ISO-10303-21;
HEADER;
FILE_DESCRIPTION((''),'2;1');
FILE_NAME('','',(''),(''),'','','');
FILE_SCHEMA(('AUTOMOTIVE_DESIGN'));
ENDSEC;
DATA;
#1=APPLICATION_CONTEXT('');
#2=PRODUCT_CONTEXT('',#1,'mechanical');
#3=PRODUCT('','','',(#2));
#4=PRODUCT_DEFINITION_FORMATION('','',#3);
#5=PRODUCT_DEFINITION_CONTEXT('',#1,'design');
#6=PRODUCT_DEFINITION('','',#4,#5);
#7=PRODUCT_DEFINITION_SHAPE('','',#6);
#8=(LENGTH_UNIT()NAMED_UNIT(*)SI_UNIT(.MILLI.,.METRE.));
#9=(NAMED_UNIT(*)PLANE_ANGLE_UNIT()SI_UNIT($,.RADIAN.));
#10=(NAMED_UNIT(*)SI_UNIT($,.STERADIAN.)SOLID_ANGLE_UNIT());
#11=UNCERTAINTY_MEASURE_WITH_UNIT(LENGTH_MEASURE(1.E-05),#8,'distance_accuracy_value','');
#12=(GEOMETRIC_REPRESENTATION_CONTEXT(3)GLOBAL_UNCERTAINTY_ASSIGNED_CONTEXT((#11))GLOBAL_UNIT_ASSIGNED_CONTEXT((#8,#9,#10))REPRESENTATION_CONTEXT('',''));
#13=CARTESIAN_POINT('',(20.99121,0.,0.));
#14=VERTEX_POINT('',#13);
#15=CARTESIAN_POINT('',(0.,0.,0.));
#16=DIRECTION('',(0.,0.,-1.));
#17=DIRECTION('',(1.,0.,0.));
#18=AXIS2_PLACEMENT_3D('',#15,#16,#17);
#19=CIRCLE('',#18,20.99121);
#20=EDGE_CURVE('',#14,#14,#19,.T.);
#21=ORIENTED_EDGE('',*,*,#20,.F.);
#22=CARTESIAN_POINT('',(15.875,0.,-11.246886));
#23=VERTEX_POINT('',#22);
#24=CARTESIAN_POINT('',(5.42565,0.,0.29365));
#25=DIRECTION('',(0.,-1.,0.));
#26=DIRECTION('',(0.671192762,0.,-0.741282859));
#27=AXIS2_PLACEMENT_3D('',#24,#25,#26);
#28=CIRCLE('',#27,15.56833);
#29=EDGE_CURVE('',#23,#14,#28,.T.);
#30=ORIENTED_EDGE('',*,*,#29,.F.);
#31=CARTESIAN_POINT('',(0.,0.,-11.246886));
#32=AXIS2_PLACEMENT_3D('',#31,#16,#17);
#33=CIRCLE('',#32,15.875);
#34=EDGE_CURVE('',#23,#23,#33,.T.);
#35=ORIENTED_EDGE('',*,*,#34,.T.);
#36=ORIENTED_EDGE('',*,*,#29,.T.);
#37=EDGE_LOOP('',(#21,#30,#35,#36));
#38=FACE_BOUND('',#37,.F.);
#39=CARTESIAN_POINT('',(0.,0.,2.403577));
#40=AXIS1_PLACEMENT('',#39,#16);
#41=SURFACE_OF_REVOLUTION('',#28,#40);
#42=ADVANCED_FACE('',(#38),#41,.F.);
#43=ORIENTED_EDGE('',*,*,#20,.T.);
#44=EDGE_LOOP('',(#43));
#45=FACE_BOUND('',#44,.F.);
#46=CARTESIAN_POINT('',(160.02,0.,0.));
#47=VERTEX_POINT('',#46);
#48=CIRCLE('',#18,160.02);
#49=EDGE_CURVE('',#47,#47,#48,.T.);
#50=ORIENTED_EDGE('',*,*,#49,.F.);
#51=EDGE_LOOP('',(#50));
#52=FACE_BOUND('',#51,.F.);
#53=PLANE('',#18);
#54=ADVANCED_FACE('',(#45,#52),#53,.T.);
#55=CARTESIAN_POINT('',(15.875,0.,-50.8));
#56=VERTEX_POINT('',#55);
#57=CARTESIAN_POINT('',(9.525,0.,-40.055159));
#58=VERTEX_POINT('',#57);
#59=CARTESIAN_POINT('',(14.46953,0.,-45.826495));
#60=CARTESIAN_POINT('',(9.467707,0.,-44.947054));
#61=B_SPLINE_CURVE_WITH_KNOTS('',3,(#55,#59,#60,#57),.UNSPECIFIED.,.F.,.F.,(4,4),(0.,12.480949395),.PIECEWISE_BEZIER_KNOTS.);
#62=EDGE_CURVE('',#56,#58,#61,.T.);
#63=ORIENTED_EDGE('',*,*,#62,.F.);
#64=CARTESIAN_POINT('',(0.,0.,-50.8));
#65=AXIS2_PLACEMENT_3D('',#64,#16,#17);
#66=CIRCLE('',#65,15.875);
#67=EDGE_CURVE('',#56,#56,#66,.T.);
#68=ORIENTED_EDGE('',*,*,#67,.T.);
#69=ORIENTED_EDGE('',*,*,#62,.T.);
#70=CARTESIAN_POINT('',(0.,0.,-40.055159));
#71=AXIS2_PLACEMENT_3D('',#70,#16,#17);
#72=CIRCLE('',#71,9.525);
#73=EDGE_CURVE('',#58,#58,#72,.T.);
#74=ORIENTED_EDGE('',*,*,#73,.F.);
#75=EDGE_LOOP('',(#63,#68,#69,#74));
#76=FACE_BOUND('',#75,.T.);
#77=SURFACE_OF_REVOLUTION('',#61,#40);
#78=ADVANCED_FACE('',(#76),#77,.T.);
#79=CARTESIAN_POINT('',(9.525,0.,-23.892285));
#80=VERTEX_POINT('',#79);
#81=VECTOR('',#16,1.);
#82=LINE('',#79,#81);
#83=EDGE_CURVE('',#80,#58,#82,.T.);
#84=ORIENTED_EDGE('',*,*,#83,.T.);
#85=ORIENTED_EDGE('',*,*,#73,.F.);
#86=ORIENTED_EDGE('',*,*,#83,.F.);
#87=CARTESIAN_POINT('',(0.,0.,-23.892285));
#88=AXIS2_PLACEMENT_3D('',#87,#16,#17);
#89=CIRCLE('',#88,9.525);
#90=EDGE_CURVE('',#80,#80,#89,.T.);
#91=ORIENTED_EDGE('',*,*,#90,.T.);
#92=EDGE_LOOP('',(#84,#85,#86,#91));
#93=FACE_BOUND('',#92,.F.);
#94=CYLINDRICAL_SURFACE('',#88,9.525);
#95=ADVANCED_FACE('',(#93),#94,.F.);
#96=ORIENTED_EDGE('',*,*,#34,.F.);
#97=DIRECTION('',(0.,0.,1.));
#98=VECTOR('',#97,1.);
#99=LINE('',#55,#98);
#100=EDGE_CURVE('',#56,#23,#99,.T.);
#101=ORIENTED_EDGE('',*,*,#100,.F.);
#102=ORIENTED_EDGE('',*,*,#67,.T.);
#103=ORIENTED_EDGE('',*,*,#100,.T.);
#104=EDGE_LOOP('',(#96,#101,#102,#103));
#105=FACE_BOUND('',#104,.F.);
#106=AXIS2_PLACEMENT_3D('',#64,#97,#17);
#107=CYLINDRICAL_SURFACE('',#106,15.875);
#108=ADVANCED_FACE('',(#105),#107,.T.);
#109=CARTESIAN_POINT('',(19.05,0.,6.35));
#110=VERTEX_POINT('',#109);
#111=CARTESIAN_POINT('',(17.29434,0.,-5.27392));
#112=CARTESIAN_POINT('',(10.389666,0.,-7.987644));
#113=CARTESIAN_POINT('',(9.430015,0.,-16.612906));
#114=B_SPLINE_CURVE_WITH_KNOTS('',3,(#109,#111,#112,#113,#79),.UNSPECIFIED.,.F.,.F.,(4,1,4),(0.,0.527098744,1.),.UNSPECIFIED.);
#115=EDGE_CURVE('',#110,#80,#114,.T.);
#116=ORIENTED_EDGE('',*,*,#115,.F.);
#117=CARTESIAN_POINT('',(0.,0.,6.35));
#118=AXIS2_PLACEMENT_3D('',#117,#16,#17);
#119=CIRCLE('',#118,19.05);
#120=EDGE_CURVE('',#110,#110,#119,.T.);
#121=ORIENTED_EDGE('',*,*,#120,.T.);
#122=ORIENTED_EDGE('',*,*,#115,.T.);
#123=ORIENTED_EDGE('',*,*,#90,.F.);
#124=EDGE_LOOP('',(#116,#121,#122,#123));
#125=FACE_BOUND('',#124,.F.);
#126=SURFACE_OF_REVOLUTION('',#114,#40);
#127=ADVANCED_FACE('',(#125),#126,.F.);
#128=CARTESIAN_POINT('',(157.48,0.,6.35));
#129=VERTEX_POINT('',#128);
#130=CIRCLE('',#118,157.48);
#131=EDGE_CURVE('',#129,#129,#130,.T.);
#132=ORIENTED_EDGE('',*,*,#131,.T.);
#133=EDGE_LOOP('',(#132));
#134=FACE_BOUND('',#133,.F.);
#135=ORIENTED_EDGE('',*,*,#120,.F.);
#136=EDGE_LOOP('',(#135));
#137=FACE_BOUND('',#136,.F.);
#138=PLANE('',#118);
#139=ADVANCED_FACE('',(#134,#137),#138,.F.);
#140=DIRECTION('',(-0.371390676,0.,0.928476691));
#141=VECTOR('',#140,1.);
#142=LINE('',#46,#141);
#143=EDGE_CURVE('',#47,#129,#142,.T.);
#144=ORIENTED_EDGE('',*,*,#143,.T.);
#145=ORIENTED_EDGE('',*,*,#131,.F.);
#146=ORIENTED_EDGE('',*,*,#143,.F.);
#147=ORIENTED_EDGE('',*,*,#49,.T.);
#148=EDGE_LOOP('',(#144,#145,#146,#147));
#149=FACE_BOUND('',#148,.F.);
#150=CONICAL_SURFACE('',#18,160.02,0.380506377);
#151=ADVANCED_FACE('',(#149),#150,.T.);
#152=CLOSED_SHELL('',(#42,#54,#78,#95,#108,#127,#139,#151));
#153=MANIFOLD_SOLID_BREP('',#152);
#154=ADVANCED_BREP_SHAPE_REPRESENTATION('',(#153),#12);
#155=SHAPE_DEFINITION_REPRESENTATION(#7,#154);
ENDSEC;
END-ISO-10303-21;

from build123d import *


with BuildPart() as f1:
    # F0 (on Front) → F1 (revolve)
    with BuildSketch(Plane.XZ):
        with BuildLine():
            ThreePointArc((15.875, -11.2468861043), (19.5966413277, -6.152735897), (20.9912098944, 0))
            Line((20.9912098944, 0), (160.02, 0))
            Line((160.02, 0), (157.48, 6.35))
            Line((157.48, 6.35), (19.05, 6.35))
            add(Edge.make_bspline(
                [(19.05, 6.35), (17.2943395607, -5.2739201542), (10.3896663187, -7.9876436539), (9.4300154597, -16.612906009), (9.525, -23.8922853023)],
                knots=[0, 0, 0, 0, 0.5270987441, 1, 1, 1, 1], degree=3))
            Line((9.525, -23.8922853023), (9.525, -40.0551594794))
            add(Edge.make_bspline(
                [(15.875, -50.8), (14.4695304334, -45.8264946938), (9.4677070156, -44.9470542371), (9.525, -40.0551594794)],
                knots=[0, 0, 0, 0, 12.4809493955, 12.4809493955, 12.4809493955, 12.4809493955], degree=3))
            Line((15.875, -50.8), (15.875, -11.2468861043))
        make_face()
    revolve(axis=Axis((0, 0, 2.4035767974), (0, 0, -1)))


solid = f1.part
